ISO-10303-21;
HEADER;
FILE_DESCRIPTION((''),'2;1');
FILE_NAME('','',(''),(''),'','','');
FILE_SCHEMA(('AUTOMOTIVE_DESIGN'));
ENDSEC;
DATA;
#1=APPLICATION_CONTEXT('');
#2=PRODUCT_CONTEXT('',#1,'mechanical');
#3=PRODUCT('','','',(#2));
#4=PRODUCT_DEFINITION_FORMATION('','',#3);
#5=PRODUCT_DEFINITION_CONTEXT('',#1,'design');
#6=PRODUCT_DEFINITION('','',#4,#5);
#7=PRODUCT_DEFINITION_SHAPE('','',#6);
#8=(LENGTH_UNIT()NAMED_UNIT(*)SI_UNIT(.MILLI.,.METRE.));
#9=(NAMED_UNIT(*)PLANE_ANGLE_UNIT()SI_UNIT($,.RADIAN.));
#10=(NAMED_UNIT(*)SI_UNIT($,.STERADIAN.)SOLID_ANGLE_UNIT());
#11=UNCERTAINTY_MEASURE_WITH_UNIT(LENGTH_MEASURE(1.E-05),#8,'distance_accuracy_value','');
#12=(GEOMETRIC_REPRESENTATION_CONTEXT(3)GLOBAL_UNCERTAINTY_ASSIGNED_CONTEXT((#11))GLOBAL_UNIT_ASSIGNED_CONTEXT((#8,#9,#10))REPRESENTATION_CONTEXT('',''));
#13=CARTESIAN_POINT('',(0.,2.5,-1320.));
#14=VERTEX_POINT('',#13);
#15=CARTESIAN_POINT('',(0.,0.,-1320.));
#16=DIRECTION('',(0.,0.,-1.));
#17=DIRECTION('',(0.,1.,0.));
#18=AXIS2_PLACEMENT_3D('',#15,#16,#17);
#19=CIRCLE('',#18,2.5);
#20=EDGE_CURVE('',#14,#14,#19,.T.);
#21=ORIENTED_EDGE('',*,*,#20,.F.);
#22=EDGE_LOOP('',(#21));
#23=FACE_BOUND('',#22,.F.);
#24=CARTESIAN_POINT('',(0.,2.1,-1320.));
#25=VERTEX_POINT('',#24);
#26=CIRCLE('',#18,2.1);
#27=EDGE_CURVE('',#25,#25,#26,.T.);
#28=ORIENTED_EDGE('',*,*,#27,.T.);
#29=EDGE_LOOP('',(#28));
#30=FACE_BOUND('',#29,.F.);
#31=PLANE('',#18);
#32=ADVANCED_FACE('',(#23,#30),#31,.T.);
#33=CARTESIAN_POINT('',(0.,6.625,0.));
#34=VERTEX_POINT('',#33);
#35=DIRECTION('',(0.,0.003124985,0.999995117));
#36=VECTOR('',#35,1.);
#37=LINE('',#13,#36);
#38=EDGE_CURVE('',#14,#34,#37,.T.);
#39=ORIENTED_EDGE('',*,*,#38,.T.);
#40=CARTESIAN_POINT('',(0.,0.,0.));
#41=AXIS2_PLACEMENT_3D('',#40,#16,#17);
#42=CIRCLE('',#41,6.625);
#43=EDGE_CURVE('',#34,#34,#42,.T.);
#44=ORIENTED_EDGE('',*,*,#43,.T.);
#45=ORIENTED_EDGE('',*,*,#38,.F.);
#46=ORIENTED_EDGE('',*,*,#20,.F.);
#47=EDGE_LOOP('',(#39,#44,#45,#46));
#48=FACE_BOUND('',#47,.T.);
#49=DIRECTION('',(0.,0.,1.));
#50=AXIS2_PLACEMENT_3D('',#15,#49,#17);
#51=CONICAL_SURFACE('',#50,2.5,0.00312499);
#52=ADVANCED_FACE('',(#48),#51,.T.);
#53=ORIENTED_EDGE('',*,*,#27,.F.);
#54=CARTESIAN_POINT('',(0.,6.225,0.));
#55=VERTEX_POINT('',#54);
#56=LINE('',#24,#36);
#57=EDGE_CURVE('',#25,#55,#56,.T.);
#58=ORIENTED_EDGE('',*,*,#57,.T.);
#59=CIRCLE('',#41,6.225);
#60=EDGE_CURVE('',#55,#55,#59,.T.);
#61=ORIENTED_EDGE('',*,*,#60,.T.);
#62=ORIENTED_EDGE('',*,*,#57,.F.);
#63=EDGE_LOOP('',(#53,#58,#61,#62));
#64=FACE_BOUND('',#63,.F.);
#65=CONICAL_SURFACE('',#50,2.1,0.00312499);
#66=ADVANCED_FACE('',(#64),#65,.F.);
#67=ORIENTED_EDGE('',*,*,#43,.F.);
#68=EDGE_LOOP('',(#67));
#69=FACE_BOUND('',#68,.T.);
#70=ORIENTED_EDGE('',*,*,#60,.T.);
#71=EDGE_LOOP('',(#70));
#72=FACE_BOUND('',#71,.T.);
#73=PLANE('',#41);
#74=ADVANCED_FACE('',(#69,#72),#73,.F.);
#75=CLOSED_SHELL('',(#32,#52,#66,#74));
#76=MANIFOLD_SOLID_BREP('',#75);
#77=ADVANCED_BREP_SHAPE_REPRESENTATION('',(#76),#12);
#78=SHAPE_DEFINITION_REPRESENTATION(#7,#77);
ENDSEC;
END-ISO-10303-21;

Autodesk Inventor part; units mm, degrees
ref_plane "YZ Plane" through (0, 0, 0) normal (1, 0, 0) x (0, 1, 0)
ref_plane "XZ Plane" through (0, 0, 0) normal (0, 1, 0) x (-1, 0, 0)
ref_plane "XY Plane" through (0, 0, 0) normal (0, 0, 1) x (1, 0, 0)
sketch "Sketch6" plane through (0, 0, 0) normal (1, 0, 0) x (0, 1, 0)
  line L0 (0, 0) -> (6.225, 0) construction
  line L1 (6.225, 0) -> (6.625, 0)
  line L2 (0, 0) -> (0, -2.5827)
  line L3 (0, 0) -> (2.5827, 0) construction
  line L4 (2.1, -1320) -> (6.225, 0)
  line L5 (2.1, -1320) -> (2.5, -1320)
  line L6 (2.1, -1320) -> (2.5, -1320) construction
  line L7 (2.5, -1320) -> (6.625, 0)
  dimension "d85" = 6.225
  dimension "d87" = 0.4
  dimension "d89" = 90
  dimension "d93" = 0.4
  dimension "d94" = 0
revolve "Revolution1" add sketch "Sketch6" angle 360 about axis through (0, 0, 0) along (0, 0, -1)
properties part number "Rear Wing Spar (tapered hollow)" material "CFRP"
